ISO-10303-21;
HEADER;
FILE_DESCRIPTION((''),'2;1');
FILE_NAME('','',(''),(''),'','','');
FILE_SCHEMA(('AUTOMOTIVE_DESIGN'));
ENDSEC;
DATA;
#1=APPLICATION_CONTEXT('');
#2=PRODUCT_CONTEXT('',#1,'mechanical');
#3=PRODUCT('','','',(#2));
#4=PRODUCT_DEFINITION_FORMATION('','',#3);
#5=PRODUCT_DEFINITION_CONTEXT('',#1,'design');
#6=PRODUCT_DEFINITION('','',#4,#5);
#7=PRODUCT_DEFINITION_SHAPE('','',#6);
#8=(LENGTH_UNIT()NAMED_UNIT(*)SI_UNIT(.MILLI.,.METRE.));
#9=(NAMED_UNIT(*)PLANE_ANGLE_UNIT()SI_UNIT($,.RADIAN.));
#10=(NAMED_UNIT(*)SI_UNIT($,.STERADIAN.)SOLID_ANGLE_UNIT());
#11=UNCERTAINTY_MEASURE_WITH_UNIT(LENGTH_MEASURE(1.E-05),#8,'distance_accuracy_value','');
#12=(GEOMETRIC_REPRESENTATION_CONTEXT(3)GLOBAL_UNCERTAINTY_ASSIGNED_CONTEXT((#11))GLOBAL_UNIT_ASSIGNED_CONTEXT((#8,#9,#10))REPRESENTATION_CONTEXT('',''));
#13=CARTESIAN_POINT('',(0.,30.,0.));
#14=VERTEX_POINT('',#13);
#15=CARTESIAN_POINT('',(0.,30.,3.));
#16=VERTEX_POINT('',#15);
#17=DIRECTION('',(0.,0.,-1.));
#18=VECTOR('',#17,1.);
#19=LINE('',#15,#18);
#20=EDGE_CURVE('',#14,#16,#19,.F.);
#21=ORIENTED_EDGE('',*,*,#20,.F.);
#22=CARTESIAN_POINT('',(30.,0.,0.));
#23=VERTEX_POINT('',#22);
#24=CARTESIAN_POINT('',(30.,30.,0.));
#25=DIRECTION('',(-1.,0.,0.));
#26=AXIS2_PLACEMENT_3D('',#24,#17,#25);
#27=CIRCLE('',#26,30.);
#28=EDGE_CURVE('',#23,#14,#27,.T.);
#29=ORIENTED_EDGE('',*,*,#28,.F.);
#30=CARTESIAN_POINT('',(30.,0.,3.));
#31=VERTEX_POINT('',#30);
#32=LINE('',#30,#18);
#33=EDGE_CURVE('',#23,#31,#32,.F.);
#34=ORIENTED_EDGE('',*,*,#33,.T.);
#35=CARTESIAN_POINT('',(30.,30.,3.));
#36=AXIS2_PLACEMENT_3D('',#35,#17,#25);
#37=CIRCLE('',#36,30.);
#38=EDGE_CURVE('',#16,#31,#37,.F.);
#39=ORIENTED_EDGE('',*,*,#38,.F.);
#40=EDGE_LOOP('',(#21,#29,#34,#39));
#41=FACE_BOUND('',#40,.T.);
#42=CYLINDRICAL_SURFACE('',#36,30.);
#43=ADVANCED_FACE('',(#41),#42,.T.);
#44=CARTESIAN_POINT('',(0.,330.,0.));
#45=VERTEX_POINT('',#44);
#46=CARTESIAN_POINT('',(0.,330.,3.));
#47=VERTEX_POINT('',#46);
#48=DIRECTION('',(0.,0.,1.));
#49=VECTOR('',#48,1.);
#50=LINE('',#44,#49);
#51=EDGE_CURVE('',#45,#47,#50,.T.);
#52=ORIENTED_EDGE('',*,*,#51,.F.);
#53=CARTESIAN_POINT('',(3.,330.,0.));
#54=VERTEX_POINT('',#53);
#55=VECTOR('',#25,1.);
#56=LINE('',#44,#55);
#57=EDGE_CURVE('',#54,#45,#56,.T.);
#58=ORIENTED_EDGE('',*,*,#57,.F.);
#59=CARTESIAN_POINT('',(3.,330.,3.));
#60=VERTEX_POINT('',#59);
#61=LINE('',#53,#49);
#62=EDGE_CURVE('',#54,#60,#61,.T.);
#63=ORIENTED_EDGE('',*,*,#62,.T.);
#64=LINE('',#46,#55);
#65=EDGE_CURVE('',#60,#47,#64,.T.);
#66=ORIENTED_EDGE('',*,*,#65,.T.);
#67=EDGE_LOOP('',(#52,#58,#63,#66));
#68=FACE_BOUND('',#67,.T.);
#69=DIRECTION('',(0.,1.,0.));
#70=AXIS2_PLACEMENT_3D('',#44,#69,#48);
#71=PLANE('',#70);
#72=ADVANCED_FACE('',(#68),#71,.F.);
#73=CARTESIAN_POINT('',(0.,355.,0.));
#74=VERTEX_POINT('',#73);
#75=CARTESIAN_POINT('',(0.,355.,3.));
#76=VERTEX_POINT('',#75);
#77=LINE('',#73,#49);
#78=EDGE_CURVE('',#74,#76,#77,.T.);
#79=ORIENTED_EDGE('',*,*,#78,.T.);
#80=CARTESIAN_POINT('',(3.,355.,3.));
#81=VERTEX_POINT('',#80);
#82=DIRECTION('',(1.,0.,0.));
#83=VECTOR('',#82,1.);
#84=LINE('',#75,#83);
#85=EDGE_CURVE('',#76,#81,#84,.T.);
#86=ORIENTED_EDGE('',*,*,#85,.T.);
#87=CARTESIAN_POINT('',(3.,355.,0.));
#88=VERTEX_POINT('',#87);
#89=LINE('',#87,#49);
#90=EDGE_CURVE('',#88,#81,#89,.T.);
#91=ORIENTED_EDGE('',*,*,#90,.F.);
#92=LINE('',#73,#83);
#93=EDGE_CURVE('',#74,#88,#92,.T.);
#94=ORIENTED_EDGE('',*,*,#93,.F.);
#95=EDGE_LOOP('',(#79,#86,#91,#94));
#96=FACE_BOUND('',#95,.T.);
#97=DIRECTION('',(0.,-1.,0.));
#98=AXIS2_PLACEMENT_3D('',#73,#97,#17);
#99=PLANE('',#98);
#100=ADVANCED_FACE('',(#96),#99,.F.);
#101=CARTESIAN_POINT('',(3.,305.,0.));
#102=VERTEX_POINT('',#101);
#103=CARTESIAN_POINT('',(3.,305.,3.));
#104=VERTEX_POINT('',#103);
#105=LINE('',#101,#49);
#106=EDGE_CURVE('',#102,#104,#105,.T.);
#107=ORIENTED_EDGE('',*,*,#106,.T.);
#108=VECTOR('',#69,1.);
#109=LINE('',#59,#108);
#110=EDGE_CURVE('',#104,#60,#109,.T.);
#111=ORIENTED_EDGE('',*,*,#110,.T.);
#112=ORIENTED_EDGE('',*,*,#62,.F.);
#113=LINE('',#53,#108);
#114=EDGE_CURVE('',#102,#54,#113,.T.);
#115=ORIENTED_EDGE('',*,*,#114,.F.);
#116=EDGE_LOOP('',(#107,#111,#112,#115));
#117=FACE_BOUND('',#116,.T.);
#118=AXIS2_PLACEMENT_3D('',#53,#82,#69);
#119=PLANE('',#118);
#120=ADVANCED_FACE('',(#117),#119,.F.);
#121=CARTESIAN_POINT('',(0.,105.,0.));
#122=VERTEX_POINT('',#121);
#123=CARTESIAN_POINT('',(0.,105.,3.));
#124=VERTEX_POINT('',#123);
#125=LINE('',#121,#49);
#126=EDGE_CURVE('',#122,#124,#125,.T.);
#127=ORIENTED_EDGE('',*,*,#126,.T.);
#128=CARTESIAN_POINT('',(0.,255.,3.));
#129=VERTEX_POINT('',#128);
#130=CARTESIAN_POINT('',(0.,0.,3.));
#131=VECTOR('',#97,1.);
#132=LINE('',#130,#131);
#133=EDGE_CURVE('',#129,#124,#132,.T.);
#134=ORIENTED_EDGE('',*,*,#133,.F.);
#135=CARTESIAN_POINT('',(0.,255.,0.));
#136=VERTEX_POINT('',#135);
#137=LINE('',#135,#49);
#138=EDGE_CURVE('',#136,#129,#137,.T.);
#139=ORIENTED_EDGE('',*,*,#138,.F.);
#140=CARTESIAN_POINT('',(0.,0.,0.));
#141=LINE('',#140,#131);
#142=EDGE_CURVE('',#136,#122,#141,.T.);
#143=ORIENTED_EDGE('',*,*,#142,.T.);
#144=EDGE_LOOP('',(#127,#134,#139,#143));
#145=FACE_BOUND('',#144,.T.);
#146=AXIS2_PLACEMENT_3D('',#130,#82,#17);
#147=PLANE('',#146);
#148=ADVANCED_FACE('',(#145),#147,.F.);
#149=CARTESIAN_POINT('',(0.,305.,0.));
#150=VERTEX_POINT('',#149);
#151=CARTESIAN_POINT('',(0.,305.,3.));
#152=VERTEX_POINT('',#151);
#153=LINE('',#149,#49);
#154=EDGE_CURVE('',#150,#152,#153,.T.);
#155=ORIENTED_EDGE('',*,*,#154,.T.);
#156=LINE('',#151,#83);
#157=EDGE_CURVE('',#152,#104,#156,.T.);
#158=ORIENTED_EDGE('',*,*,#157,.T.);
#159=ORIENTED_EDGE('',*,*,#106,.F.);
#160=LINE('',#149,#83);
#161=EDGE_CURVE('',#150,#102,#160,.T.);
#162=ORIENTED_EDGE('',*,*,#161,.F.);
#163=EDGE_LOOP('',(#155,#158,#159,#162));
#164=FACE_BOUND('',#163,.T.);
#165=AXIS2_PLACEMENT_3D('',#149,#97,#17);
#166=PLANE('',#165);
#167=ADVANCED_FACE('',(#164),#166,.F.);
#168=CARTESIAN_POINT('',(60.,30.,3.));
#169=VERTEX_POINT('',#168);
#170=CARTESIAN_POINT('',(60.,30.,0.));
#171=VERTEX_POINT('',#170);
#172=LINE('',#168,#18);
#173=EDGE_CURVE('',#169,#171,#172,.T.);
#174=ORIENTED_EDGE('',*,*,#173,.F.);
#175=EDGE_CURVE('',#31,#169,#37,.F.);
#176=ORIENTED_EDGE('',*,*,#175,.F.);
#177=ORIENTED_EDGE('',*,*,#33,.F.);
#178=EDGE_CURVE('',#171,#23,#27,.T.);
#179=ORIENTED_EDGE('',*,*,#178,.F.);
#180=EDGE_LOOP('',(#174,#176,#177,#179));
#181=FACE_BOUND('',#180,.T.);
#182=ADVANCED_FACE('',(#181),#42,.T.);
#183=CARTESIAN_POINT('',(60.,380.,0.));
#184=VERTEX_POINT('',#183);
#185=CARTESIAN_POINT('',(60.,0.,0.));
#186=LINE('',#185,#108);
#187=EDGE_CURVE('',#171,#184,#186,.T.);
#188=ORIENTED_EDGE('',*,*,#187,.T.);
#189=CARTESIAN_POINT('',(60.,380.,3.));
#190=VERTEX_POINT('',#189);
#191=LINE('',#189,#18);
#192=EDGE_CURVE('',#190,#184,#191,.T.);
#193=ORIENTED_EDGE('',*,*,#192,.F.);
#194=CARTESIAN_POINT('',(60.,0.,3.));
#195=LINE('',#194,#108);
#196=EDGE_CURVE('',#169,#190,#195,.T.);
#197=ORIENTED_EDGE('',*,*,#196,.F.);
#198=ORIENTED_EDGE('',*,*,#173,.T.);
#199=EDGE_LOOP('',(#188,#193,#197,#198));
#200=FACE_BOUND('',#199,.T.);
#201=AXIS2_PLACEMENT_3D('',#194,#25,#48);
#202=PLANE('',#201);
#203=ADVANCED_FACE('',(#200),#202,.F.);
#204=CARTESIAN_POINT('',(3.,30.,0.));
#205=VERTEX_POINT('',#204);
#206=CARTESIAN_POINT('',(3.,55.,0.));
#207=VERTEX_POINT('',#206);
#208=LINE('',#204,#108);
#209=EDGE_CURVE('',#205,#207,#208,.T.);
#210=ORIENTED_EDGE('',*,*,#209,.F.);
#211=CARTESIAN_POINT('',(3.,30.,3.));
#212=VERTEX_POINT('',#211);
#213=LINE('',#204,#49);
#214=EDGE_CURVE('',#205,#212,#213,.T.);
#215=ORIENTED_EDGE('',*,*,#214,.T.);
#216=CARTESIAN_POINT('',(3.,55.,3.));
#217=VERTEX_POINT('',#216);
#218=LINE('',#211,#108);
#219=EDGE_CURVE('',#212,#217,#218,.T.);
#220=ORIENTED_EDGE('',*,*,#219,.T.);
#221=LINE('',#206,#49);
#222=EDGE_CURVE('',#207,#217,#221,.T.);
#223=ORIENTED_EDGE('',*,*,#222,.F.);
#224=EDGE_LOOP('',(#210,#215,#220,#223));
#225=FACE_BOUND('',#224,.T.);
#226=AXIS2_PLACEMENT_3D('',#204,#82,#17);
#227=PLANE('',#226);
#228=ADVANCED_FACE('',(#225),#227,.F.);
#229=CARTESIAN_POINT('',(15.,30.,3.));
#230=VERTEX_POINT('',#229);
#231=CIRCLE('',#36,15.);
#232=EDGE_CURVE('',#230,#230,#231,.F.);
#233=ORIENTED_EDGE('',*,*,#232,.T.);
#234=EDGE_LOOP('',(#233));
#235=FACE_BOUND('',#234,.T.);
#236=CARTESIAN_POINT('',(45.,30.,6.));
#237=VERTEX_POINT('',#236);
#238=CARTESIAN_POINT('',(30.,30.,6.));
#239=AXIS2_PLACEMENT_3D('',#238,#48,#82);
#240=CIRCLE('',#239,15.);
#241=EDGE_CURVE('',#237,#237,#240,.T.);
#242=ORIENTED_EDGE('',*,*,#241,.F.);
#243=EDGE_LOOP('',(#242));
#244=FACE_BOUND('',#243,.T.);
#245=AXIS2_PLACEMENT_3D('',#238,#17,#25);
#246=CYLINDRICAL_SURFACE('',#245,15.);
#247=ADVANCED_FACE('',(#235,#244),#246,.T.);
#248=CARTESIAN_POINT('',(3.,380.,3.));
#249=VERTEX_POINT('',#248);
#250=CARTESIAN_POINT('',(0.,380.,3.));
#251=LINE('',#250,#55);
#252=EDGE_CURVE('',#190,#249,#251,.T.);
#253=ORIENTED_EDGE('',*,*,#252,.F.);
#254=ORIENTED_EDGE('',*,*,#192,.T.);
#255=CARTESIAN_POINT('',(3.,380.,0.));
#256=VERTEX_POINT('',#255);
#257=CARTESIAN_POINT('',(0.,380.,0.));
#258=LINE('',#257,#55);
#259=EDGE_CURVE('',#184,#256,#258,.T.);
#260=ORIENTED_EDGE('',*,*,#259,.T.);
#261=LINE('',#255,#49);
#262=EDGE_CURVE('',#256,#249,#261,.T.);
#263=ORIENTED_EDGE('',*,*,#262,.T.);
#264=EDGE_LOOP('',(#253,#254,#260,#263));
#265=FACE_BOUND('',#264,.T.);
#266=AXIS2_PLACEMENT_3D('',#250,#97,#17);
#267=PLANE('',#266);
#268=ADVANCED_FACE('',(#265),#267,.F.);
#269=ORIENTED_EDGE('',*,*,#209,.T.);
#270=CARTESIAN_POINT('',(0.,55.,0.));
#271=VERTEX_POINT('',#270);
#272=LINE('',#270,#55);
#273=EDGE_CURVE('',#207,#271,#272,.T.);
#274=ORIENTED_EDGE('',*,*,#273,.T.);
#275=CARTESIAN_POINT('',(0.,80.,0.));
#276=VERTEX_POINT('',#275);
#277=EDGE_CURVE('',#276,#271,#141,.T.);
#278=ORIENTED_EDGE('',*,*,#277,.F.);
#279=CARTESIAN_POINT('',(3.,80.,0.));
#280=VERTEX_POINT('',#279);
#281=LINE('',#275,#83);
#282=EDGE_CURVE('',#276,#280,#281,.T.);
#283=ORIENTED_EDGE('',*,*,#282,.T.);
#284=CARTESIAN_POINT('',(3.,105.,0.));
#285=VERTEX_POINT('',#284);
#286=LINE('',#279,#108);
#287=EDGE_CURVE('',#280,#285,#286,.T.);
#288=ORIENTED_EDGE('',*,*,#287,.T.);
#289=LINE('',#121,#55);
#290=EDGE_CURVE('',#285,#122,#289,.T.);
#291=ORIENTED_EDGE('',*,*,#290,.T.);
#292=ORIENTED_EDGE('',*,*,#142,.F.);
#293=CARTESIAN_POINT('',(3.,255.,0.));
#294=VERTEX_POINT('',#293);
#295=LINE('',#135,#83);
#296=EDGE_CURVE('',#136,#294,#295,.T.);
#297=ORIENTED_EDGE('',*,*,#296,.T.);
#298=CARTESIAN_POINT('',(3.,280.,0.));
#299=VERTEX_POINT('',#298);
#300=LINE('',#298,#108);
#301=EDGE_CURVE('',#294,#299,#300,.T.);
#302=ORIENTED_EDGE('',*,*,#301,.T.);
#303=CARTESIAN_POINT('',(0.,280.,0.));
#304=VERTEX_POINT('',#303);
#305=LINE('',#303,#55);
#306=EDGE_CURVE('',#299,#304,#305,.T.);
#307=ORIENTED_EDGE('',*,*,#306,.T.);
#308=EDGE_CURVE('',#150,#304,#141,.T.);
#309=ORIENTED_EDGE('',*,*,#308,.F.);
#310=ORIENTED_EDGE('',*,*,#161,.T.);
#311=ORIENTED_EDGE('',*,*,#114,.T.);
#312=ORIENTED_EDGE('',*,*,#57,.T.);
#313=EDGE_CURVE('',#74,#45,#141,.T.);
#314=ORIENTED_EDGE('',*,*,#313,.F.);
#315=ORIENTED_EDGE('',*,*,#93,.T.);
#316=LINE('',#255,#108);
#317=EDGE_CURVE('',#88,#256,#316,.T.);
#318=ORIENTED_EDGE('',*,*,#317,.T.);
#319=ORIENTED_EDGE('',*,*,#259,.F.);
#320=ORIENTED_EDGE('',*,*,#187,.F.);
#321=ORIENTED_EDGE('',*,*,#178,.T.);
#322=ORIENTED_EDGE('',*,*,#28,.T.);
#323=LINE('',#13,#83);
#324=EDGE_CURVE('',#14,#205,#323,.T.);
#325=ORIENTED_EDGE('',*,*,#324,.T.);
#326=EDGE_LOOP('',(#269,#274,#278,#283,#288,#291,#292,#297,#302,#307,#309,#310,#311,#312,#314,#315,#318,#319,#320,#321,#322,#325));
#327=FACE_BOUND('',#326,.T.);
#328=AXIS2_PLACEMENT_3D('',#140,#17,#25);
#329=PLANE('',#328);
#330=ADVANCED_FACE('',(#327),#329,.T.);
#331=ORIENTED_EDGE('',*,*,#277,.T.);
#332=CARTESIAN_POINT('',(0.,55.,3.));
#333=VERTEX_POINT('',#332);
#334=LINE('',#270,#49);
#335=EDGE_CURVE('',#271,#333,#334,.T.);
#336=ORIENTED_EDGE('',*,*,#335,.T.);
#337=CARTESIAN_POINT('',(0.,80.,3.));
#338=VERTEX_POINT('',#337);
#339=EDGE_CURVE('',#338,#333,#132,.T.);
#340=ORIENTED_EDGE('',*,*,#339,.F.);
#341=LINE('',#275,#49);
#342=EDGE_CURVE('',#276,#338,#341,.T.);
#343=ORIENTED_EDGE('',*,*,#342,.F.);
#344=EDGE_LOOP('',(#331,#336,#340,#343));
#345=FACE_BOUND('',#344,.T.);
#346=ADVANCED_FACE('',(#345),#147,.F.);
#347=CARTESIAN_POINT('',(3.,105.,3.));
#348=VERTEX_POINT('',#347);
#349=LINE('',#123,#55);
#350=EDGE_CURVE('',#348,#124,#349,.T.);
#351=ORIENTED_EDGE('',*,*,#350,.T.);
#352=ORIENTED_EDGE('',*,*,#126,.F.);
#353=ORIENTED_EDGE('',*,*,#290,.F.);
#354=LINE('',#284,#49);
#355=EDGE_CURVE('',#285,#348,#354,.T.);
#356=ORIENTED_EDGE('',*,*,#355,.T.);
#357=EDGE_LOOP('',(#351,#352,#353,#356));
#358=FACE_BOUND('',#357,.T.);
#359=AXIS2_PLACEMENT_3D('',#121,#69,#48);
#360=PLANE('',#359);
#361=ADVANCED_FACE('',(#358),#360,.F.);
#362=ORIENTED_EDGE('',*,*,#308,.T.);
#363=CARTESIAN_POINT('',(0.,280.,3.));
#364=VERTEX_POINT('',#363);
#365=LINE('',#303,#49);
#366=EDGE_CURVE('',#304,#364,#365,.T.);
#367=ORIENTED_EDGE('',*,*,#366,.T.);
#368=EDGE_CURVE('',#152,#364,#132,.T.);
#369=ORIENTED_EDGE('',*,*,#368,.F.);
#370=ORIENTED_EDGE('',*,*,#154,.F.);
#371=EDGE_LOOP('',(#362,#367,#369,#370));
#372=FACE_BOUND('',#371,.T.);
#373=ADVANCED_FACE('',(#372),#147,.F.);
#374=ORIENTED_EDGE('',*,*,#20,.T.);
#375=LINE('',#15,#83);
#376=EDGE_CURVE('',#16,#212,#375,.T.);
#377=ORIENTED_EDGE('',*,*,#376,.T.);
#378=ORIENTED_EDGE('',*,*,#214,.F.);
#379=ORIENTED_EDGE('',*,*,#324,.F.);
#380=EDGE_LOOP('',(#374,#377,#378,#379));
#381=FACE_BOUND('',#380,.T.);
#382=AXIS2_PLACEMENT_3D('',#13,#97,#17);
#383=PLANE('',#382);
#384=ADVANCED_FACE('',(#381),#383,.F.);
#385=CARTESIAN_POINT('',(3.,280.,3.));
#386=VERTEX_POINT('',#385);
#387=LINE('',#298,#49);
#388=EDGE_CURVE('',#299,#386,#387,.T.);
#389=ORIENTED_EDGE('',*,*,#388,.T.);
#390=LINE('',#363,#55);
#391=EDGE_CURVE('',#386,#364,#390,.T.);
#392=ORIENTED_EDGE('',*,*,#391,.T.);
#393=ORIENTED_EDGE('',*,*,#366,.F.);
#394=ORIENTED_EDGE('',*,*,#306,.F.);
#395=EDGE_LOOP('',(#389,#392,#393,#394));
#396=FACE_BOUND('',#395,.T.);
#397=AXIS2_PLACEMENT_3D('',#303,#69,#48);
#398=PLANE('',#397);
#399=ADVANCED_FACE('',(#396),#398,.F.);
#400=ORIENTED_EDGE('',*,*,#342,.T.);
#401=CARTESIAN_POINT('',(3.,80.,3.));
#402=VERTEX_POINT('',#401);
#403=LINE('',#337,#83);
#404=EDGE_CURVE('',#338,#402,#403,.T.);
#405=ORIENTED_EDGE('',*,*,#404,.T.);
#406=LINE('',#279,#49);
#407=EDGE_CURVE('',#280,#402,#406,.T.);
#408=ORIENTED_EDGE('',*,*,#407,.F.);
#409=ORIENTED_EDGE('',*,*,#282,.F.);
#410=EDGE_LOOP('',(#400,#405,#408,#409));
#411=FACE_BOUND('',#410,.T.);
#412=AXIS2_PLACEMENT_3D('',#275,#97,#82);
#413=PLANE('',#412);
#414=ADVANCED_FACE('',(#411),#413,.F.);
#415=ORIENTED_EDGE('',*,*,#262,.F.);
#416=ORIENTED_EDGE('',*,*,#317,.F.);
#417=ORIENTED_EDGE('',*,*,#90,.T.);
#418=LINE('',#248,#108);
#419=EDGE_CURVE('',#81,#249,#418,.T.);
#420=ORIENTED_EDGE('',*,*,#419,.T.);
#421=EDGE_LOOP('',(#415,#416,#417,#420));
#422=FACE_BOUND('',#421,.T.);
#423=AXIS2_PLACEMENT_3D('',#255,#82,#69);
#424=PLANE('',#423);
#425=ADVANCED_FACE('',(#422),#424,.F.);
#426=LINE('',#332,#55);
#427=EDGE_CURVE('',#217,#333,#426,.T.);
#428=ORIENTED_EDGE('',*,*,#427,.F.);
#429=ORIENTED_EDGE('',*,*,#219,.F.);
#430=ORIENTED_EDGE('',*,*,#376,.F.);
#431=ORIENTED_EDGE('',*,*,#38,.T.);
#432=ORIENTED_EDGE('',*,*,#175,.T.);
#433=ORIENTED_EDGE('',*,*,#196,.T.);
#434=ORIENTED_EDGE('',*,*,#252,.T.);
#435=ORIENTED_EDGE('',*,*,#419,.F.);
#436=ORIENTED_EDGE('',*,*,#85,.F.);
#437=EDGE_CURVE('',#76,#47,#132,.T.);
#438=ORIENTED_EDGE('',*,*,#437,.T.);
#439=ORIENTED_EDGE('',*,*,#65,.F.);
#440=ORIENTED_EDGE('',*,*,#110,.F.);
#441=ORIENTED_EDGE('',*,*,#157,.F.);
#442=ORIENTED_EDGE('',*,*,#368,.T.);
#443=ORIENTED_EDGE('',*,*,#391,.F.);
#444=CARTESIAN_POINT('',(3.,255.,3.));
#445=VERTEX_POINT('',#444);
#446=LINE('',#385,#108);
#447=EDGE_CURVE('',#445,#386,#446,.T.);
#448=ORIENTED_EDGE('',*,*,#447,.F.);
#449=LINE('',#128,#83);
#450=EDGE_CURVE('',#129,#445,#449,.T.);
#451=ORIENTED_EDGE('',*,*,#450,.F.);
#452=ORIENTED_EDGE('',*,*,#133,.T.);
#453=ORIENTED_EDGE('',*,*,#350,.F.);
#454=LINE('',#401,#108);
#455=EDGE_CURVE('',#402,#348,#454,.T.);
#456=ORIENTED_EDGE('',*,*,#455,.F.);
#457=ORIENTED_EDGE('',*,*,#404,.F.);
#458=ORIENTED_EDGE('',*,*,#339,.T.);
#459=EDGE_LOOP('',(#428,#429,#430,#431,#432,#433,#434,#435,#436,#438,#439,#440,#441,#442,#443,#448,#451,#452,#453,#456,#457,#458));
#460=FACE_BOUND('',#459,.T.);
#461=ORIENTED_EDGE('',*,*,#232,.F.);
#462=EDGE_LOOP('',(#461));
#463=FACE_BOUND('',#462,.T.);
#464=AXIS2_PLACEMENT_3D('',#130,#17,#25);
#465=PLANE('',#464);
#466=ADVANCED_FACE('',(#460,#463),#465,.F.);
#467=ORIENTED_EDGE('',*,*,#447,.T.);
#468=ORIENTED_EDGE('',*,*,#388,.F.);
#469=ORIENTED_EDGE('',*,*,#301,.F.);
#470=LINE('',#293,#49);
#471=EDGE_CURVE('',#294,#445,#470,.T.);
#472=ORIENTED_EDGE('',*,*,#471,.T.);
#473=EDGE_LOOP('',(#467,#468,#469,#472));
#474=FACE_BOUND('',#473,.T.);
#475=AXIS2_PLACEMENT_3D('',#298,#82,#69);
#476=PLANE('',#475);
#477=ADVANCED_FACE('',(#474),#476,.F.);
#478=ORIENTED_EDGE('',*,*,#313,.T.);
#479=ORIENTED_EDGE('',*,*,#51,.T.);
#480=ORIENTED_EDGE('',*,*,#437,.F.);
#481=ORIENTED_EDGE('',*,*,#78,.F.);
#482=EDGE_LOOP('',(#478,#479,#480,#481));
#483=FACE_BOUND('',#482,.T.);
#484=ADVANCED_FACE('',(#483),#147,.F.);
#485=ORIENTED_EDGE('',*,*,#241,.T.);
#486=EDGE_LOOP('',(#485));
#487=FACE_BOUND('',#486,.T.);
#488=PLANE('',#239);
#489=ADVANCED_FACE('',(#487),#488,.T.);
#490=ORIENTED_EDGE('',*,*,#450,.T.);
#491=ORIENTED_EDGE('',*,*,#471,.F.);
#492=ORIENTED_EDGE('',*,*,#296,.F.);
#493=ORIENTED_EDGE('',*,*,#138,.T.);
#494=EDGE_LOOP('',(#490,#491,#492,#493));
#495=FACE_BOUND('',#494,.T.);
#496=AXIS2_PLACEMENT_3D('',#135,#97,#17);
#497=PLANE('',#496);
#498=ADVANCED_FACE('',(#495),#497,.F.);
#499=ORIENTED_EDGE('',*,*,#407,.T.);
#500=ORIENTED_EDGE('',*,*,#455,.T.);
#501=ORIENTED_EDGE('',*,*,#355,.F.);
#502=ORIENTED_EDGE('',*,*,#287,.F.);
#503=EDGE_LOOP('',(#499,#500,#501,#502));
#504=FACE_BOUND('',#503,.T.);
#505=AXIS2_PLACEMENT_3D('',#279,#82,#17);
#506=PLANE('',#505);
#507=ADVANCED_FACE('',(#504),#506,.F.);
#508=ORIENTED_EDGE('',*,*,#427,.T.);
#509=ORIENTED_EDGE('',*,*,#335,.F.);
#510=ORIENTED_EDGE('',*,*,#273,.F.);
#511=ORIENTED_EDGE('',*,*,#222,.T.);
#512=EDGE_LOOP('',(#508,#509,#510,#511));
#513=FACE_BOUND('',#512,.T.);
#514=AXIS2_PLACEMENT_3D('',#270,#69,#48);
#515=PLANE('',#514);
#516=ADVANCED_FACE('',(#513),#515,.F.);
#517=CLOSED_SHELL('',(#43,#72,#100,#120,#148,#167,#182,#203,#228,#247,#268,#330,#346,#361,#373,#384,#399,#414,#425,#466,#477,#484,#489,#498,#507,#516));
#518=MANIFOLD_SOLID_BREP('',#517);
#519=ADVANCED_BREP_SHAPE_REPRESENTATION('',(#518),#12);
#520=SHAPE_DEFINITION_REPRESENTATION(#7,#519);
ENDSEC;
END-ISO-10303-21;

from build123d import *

# Parameters (mm, degrees)
ESQUISSE1_W             = 60
ESQUISSE1_H             = 380
BOSS_EXTRU_1_DEPTH      = 3
CONG_1_R                = 30
ESQUISSE2_W             = 3
ESQUISSE2_H             = 25
ENL_V_MAT_EXTRU_1_DEPTH = 3
ESQUISSE3_R             = 15
BOSS_EXTRU_2_DEPTH      = 3
ESQUISSE4_W             = 3
ESQUISSE4_H             = 25
ENL_V_MAT_EXTRU_2_DEPTH = 3


with BuildPart() as part:
    # Esquisse1 → Boss.-Extru.1 (new body)
    with BuildSketch(Plane.XY):
        with Locations((30, 190)):
            Rectangle(ESQUISSE1_W, ESQUISSE1_H)
    extrude(amount=BOSS_EXTRU_1_DEPTH)

    # Congé1
    cong_1_edges = [part.edges().sort_by_distance(p)[0] for p in [
        (0, 0, 1.5),
        (60, 0, 1.5),
    ]]
    fillet(cong_1_edges, radius=CONG_1_R - 0.0001)  # a hair under: the kernel refuses the full size

    # Esquisse2 → Enlèv. mat.-Extru.1 (cut)
    with BuildSketch(Plane.XY.offset(3)):
        with Locations((1.5, 367.5)):
            Rectangle(ESQUISSE2_W, ESQUISSE2_H)
        with Locations((1.5, 317.5)):
            Rectangle(ESQUISSE2_W, ESQUISSE2_H)
        with Locations((1.5, 267.5)):
            Rectangle(ESQUISSE2_W, ESQUISSE2_H)
    extrude(amount=-ENL_V_MAT_EXTRU_1_DEPTH, mode=Mode.SUBTRACT)

    # Esquisse3 → Boss.-Extru.2 (add)
    with BuildSketch(Plane.XY.offset(3)):
        with Locations(Location((30, 30, 0), (0, 0, 180))):
            Circle(ESQUISSE3_R)
    extrude(amount=BOSS_EXTRU_2_DEPTH)

    # Esquisse4 → Enlèv. mat.-Extru.2 (cut)
    with BuildSketch(Plane.XY.offset(3)):
        with Locations((1.5, 42.5)):
            Rectangle(ESQUISSE4_W, ESQUISSE4_H)
        with Locations((1.5, 92.5)):
            Rectangle(ESQUISSE4_W, ESQUISSE4_H)
    extrude(amount=-ENL_V_MAT_EXTRU_2_DEPTH, mode=Mode.SUBTRACT)


solid = part.part
